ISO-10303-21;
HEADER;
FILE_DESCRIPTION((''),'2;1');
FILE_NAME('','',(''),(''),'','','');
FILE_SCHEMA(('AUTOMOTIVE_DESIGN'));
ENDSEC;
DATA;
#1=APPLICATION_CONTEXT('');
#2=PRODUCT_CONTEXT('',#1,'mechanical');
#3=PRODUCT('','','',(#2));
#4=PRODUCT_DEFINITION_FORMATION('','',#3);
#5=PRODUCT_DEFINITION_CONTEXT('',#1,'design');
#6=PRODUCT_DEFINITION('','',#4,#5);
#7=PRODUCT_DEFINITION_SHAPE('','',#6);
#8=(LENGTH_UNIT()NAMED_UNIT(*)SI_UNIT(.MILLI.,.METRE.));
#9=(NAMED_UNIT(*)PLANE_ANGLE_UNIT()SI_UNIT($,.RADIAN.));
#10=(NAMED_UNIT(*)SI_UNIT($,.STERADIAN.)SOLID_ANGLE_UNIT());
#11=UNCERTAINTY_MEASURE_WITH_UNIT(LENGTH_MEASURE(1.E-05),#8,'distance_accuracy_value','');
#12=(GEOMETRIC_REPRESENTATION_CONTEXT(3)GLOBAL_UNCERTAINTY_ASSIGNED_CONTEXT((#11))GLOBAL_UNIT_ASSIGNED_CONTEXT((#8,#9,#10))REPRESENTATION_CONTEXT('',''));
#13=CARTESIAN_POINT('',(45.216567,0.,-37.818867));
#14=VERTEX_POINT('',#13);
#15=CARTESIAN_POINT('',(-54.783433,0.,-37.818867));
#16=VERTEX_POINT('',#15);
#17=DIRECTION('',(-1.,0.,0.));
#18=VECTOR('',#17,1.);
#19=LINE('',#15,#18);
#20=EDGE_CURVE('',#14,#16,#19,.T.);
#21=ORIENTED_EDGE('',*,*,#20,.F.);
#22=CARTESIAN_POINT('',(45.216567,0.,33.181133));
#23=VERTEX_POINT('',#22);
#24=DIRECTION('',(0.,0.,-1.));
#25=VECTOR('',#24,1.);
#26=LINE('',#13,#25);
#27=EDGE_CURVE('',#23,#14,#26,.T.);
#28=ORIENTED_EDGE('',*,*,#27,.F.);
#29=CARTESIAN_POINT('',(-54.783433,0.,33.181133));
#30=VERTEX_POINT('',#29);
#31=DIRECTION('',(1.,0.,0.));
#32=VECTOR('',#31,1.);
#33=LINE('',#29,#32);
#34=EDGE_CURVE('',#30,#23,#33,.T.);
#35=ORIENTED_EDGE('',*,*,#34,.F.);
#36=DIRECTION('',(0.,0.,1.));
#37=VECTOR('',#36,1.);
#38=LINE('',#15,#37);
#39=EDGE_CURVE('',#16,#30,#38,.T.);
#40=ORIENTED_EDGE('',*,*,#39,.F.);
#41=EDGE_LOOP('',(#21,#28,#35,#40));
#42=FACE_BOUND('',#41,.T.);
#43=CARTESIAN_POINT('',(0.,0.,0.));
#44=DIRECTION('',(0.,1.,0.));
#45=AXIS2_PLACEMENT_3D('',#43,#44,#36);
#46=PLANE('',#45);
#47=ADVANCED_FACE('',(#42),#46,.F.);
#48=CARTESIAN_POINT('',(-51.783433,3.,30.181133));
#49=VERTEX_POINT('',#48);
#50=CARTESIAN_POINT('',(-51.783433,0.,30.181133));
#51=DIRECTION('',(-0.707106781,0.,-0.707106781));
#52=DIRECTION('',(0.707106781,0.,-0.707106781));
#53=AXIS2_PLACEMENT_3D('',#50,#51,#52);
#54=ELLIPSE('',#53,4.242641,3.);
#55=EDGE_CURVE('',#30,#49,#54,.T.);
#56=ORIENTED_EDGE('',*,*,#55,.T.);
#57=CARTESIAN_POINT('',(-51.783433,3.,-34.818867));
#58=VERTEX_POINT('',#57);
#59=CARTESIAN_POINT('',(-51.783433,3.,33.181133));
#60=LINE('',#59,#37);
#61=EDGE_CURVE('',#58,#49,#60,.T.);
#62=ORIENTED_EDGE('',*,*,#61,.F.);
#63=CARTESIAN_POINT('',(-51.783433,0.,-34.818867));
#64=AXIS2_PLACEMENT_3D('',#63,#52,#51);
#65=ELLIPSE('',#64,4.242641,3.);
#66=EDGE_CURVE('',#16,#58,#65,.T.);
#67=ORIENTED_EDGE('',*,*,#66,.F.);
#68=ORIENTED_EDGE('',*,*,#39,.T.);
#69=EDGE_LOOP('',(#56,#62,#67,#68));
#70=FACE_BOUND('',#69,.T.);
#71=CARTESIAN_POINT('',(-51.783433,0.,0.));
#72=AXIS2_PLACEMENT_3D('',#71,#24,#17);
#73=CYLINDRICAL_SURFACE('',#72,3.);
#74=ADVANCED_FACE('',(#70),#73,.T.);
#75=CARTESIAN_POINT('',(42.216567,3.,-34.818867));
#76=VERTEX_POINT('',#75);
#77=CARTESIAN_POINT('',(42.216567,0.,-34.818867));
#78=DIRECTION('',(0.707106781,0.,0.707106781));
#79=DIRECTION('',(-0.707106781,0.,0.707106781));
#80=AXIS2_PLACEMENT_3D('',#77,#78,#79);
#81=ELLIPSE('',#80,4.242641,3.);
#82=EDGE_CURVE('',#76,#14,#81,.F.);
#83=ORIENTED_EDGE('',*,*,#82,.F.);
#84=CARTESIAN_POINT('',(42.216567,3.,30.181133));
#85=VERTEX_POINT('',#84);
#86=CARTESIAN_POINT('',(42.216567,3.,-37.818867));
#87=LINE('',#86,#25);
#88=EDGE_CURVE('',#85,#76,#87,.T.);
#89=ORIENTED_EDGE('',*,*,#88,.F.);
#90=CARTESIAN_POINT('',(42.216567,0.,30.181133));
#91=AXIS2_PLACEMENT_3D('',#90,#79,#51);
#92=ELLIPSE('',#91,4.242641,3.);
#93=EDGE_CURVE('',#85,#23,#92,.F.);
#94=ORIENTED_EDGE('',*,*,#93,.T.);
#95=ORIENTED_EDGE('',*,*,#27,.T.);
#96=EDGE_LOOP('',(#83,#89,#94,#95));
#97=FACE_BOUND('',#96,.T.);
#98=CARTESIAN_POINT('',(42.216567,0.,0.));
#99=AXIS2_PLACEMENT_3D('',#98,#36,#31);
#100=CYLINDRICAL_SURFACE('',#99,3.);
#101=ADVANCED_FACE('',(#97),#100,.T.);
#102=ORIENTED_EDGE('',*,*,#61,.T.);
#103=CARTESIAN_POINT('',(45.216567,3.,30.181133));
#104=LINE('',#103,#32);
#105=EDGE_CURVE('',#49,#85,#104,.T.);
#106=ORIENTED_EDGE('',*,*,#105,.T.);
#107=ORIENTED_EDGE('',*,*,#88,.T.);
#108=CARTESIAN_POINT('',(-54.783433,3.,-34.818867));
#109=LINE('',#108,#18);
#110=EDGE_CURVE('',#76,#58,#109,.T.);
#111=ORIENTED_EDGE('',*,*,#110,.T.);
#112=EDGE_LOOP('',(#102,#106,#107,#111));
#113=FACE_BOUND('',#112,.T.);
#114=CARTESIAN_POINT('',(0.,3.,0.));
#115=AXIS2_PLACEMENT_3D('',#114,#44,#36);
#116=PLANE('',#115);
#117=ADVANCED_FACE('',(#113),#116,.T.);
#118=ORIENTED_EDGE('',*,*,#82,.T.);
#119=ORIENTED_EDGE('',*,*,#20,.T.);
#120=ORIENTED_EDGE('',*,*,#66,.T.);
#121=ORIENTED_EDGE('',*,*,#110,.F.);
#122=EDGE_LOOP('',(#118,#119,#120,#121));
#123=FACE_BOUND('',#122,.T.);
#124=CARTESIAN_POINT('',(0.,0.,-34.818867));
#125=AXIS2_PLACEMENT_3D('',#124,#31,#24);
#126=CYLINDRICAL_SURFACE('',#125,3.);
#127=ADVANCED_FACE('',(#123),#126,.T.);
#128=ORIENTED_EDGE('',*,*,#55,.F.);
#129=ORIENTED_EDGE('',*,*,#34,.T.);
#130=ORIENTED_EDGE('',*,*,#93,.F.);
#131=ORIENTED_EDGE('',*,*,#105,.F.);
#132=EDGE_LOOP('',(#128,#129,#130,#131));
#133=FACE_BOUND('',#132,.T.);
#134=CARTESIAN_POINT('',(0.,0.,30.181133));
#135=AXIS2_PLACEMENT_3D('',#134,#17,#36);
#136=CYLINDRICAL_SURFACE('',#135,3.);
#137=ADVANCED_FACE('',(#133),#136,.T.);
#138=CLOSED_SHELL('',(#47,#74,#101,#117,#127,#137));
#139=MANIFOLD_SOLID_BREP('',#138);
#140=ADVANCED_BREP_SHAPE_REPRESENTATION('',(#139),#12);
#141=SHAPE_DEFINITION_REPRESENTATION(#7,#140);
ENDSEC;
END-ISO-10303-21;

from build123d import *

# Parameters (mm, degrees)
SKETCH1_W           = 100
SKETCH1_H           = 71
BOSS_EXTRUDE1_DEPTH = 3
FILLET4_R           = 3


with BuildPart() as part:
    # Sketch1 → Boss-Extrude1 (new body)
    with BuildSketch(Plane(origin=(0, 0, 0), x_dir=(1, 0, 0), z_dir=(0, 1, 0))):
        with Locations((-4.783432937, 2.318867117)):
            Rectangle(SKETCH1_W, SKETCH1_H)
    extrude(amount=BOSS_EXTRUDE1_DEPTH)

    # Fillet4
    fillet4_edges = [part.edges().sort_by_distance(p)[0] for p in [
        (-4.783432937, 3, -37.818867117),
        (45.216567063, 3, -2.318867117),
        (-4.783432937, 3, 33.181132883),
        (-54.783432937, 3, -2.318867117),
    ]]
    fillet(fillet4_edges, radius=FILLET4_R - 0.0001)  # a hair under: the kernel refuses the full size


solid = part.part
